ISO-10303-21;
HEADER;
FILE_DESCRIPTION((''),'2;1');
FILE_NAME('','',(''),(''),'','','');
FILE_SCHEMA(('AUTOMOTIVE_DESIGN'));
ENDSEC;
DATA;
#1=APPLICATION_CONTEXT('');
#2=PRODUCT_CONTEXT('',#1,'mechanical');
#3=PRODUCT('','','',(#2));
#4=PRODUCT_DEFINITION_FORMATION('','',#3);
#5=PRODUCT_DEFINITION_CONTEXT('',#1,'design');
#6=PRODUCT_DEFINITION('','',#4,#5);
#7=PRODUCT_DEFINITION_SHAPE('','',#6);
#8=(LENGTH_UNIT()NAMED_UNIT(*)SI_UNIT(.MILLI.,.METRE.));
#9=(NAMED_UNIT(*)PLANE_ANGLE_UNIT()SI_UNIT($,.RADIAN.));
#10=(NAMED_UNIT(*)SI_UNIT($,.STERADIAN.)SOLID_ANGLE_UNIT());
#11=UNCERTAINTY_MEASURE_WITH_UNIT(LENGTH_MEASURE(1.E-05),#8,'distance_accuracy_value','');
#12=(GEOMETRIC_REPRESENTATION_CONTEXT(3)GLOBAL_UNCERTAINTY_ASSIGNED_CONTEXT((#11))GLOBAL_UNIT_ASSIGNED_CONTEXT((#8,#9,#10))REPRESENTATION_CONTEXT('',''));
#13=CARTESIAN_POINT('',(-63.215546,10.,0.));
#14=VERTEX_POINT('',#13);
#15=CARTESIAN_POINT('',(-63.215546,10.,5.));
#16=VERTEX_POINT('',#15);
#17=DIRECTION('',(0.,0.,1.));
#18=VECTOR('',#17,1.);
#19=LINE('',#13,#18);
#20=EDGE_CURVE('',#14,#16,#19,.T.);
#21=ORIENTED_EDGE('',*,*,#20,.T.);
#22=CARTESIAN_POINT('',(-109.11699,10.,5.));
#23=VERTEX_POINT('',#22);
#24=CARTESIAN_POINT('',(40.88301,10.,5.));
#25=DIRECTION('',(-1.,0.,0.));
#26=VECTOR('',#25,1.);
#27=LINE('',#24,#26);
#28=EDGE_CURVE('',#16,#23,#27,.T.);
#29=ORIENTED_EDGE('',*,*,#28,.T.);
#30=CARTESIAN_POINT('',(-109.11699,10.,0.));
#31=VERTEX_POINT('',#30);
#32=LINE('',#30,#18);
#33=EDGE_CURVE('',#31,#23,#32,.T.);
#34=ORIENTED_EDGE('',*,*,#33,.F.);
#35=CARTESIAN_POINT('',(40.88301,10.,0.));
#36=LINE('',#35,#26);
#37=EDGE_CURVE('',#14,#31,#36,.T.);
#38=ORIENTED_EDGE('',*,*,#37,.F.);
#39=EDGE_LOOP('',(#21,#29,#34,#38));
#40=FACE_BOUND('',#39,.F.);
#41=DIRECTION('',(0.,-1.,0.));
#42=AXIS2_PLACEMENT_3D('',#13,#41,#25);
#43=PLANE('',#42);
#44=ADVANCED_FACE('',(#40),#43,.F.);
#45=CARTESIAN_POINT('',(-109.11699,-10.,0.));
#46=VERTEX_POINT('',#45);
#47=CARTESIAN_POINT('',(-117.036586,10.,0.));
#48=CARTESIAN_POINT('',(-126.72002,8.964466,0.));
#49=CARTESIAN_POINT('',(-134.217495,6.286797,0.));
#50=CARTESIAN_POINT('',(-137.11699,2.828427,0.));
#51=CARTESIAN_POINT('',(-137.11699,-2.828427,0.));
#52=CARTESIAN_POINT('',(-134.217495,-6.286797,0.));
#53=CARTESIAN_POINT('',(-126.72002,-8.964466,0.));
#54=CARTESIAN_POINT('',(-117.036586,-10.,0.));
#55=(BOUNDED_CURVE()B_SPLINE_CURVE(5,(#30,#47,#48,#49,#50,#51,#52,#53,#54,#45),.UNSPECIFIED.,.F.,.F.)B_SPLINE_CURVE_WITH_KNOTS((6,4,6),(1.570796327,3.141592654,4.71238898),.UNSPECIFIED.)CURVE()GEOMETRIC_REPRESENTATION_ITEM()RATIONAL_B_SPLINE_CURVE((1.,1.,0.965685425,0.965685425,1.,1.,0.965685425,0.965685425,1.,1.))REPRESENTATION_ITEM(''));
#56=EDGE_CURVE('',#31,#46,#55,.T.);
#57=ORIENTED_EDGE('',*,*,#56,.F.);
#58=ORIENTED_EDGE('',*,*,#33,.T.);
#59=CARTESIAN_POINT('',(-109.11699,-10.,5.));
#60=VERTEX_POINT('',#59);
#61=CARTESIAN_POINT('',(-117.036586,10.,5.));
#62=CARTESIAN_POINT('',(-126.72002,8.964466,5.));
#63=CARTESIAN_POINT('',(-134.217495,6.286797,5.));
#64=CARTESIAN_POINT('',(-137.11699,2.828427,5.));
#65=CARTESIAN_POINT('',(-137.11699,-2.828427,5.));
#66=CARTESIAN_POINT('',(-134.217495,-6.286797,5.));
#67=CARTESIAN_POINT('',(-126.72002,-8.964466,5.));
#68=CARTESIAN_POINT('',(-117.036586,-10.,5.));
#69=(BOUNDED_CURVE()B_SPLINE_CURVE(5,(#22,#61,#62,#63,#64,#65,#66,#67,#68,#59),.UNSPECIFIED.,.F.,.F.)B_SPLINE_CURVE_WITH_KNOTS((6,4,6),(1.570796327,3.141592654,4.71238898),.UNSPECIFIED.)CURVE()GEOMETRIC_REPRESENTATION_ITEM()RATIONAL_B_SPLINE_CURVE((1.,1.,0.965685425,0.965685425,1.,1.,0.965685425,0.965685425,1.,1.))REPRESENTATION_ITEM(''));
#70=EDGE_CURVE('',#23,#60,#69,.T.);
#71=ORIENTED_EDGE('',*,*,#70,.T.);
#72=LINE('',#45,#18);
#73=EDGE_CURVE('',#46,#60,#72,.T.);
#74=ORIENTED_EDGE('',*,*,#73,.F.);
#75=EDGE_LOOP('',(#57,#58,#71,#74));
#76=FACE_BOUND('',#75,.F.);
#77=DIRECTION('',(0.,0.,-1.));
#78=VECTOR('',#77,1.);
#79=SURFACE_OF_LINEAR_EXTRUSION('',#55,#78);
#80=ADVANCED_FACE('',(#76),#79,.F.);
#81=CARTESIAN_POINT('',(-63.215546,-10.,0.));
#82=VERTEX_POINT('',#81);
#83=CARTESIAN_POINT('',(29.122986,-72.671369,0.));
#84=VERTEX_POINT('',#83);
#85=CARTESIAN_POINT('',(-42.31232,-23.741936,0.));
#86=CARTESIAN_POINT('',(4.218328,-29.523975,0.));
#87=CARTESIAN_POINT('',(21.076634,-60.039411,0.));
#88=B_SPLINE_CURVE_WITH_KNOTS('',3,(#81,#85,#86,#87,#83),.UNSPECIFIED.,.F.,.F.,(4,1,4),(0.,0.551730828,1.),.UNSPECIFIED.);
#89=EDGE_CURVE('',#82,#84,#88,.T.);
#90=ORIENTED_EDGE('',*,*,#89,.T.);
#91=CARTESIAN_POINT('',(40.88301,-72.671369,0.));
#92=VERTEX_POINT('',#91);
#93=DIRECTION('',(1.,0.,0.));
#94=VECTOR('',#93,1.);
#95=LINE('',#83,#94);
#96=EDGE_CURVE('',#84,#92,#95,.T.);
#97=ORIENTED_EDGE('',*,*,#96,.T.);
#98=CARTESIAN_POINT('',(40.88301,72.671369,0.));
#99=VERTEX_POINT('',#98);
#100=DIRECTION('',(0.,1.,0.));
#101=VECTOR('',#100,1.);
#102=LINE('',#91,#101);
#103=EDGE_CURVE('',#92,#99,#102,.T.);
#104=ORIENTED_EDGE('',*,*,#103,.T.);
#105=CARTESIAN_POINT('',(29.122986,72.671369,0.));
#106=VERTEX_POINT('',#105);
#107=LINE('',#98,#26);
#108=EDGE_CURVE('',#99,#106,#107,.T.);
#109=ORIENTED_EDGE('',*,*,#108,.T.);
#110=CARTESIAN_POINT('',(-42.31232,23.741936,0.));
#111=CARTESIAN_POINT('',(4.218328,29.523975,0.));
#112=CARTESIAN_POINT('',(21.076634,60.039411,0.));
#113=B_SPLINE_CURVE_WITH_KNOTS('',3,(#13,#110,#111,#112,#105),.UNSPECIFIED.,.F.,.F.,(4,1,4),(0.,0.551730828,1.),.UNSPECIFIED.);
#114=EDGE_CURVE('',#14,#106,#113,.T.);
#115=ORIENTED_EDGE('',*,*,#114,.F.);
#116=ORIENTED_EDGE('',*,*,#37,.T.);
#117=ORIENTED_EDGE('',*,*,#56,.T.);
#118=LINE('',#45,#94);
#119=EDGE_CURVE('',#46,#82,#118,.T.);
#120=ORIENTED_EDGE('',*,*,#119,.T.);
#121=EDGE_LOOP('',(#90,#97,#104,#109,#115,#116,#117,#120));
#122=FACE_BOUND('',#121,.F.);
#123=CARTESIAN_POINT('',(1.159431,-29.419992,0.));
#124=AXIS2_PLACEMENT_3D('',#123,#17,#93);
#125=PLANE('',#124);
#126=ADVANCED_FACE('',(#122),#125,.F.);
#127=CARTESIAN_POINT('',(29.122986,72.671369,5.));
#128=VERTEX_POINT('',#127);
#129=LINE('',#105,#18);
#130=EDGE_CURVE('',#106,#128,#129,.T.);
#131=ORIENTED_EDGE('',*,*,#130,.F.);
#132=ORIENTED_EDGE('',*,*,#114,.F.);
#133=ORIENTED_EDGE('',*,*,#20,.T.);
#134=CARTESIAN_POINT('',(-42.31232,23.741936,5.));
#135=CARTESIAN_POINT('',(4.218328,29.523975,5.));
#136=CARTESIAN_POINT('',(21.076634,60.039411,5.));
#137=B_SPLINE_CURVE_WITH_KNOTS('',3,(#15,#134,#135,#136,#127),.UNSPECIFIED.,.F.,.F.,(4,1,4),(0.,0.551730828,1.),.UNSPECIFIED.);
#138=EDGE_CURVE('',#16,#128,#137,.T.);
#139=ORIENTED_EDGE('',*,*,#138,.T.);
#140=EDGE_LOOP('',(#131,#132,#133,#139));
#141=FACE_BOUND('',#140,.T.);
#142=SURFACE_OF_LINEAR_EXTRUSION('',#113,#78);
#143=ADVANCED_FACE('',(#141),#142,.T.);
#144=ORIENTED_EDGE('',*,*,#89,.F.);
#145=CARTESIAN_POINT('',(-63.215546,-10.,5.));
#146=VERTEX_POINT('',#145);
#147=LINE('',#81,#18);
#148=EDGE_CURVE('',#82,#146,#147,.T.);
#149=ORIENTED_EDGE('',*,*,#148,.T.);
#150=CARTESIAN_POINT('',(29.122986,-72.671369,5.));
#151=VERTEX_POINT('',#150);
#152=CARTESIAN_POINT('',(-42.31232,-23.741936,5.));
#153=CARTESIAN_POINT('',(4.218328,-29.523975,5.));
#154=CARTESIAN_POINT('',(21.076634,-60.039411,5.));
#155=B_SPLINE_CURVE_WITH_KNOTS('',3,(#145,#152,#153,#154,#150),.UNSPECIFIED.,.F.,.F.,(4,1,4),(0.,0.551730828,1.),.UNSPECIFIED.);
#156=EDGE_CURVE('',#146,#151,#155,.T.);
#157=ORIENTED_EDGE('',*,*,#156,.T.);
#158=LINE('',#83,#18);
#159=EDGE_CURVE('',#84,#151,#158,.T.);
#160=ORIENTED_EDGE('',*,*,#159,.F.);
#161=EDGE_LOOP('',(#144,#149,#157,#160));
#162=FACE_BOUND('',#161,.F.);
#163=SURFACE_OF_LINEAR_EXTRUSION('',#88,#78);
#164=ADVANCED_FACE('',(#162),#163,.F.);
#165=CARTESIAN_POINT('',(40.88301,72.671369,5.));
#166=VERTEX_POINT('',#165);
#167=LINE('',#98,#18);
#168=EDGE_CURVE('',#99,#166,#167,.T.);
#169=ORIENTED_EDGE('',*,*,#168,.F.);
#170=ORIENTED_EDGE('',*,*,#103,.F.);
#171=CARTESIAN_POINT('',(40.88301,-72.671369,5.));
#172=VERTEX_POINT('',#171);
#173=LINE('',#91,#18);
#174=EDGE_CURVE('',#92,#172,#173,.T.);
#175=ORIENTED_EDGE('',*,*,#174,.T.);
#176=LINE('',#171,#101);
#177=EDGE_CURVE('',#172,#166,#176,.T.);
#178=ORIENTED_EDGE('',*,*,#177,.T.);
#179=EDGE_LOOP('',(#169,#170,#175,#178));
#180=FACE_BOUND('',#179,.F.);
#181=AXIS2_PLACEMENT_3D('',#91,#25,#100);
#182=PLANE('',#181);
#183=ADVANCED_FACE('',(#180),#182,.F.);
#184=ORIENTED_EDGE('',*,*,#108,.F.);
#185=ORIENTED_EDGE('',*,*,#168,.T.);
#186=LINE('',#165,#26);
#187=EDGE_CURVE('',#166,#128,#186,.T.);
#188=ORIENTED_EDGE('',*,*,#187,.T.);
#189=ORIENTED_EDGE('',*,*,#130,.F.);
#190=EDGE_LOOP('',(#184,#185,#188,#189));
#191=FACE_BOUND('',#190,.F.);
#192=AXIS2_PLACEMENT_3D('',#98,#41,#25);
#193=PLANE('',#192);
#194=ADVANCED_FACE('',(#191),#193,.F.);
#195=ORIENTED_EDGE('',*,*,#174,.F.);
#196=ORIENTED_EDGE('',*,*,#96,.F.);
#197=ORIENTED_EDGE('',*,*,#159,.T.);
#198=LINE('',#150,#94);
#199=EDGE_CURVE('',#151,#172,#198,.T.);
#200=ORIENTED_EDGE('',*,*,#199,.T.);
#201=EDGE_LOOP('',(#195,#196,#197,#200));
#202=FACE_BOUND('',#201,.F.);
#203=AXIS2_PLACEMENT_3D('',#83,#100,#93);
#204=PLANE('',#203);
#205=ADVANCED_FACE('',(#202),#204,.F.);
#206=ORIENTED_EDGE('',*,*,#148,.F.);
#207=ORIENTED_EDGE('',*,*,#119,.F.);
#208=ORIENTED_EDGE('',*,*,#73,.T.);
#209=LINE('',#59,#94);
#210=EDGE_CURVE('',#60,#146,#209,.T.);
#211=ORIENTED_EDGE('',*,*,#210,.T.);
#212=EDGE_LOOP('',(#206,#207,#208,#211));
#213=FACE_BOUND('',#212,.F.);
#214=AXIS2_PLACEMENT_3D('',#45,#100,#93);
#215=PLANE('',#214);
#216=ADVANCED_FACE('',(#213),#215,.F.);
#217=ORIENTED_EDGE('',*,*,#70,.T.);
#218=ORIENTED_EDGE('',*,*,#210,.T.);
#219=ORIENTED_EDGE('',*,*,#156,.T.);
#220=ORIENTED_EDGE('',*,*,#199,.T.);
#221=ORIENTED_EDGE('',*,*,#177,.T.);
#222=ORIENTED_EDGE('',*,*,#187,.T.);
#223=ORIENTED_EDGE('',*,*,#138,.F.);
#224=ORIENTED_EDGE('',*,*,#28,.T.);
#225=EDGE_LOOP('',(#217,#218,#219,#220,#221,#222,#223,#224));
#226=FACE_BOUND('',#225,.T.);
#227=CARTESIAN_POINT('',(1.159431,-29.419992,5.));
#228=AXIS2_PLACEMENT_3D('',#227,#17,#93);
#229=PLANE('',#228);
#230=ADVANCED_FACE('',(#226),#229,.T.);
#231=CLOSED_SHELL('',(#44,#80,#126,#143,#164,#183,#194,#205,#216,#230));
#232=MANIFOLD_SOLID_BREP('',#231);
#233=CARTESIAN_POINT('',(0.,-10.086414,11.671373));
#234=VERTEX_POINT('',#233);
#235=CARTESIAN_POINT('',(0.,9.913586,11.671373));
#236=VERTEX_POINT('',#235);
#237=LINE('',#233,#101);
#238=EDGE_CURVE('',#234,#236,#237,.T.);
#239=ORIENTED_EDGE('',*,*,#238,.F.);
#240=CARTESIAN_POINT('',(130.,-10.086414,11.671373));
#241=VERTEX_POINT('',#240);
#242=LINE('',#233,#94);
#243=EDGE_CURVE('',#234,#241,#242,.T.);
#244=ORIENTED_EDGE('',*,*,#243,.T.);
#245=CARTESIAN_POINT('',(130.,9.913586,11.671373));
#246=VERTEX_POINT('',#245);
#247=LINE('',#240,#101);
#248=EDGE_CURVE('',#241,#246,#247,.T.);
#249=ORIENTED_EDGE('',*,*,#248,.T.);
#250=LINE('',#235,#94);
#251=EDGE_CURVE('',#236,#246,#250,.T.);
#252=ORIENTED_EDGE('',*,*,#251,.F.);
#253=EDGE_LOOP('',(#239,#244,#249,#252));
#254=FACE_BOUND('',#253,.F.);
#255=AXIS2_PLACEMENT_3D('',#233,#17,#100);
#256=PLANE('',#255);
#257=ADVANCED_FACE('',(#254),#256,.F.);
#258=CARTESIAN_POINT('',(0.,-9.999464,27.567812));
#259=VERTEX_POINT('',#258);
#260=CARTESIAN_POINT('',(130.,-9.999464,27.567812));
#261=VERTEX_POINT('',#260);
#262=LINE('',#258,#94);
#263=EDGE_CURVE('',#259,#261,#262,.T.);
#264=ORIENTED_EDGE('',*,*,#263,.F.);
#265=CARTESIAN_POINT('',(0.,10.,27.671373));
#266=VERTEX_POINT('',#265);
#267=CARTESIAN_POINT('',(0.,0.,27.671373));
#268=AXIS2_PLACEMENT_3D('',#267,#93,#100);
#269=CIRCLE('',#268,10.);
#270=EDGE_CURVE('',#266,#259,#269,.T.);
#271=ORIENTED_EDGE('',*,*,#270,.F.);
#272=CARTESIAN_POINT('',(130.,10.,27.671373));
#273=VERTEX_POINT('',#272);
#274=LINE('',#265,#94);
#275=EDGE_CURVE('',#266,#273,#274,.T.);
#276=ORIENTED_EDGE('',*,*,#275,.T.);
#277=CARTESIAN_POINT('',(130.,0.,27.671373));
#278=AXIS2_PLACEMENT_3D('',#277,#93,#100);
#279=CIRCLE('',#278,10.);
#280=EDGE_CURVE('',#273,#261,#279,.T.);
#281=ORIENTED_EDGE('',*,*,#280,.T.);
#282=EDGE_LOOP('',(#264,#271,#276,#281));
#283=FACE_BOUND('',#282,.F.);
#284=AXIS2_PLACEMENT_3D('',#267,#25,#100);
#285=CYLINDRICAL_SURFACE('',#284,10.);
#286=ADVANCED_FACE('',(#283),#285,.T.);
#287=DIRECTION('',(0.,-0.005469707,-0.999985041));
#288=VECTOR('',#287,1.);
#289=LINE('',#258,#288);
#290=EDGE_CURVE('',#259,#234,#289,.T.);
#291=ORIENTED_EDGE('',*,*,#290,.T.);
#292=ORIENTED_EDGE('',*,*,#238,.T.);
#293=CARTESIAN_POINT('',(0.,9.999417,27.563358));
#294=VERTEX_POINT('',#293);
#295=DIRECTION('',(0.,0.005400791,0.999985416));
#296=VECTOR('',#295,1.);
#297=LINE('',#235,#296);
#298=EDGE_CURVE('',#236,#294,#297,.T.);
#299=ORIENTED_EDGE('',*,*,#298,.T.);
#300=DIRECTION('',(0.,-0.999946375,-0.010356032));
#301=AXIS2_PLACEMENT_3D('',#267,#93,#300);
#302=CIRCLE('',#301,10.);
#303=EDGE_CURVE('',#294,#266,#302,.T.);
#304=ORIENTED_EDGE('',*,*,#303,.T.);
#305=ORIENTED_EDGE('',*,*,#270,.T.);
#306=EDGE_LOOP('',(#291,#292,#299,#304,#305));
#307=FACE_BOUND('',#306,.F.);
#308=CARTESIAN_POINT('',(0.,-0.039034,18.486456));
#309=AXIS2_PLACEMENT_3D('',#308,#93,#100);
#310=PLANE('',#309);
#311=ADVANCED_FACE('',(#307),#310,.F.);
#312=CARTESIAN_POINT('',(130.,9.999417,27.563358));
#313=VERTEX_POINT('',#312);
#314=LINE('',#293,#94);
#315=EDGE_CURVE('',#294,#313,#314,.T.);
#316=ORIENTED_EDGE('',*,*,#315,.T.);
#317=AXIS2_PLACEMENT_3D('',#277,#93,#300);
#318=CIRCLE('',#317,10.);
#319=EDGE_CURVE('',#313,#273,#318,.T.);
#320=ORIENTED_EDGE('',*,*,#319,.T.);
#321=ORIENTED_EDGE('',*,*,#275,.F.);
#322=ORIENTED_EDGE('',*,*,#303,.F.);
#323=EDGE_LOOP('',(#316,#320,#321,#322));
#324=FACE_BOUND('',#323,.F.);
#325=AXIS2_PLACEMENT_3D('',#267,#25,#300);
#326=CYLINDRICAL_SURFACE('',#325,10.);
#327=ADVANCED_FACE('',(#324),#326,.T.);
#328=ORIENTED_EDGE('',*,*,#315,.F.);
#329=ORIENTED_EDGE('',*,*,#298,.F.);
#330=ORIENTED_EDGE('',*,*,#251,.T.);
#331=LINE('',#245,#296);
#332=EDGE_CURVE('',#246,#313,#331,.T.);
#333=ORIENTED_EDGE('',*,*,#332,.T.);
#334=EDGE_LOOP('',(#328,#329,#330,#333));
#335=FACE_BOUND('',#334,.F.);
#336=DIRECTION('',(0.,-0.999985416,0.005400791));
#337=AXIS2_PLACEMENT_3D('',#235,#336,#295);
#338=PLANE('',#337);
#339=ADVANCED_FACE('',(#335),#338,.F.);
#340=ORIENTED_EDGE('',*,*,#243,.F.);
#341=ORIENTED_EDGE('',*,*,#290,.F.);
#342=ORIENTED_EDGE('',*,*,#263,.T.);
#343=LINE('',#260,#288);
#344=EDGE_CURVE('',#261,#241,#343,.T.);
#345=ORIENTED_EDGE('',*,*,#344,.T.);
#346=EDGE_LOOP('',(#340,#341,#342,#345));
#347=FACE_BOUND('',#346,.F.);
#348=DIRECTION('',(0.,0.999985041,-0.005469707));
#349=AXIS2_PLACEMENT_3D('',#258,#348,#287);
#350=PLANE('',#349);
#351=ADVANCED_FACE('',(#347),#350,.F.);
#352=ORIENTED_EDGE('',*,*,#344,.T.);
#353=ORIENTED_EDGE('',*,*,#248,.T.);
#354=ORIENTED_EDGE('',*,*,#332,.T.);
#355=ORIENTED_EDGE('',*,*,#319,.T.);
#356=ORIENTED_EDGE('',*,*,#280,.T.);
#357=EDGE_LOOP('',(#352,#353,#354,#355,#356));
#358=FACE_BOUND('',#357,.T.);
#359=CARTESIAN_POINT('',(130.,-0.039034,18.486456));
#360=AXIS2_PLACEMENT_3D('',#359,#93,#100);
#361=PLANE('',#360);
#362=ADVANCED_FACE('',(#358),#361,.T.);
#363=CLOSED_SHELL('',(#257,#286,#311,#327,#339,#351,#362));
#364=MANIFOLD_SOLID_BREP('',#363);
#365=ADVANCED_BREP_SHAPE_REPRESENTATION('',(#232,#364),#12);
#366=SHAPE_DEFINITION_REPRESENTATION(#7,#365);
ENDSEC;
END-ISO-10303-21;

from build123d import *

# Parameters (mm, degrees)
F1_DEPTH = 5
F3_DEPTH = 130


# Not quite as in the source:
# - a feature names something its author has since deleted; it is built from what else it names


with BuildPart() as f1:
    # F0 (on Top) → F1 (new body)
    with BuildSketch(Plane.XY):
        with BuildLine():
            Line((40.8830098808, -10), (-63.2155463099, -10))
            add(Edge.make_bspline(
                [(-63.2155463099, -10), (-42.3123203218, -23.7419363111), (4.2183280181, -29.5239745011), (21.0766339926, -60.0394110264), (29.1229858994, -72.6713687181)],
                knots=[0, 0, 0, 0, 0.551730828, 1, 1, 1, 1], degree=3))
            Line((29.1229858994, -72.6713687181), (40.8830098808, -72.6713687181))
            Line((40.8830098808, -72.6713687181), (40.8830098808, -10))
        make_face()
        with BuildLine():
            Line((-63.2155463099, 10), (-109.1169901192, 10))
            add(Edge.make_bspline(
                [(-81.1169901192, 0), (-81.1169901192, 10), (-109.1169901192, 10)],
                knots=[0, 0, 0, 1.5707963268, 1.5707963268, 1.5707963268], degree=2, weights=[1, 0.7071067812, 1]))
            add(Edge.make_bspline(
                [(-109.1169901192, -10), (-81.1169901192, -10), (-81.1169901192, 0)],
                knots=[4.7123889804, 4.7123889804, 4.7123889804, 6.2831853072, 6.2831853072, 6.2831853072], degree=2, weights=[1, 0.7071067812, 1]))
            Line((-109.1169901192, -10), (-63.2155463099, -10))
            Line((-63.2155463099, -10), (40.8830098808, -10))
            Line((40.8830098808, -10), (40.8830098808, 0))
            Line((40.8830098808, 0), (40.8830098808, 10))
            Line((40.8830098808, 10), (-63.2155463099, 10))
        make_face()
        with BuildLine():
            add(Edge.make_bspline(
                [(-63.2155463099, 10), (-42.3123203218, 23.7419363111), (4.2183280181, 29.5239745011), (21.0766339926, 60.0394110264), (29.1229858994, 72.6713687181)],
                knots=[0, 0, 0, 0, 0.551730828, 1, 1, 1, 1], degree=3))
            Line((-63.2155463099, 10), (40.8830098808, 10))
            Line((40.8830098808, 10), (40.8830098808, 72.6713687181))
            Line((40.8830098808, 72.6713687181), (29.1229858994, 72.6713687181))
        make_face()
        with BuildLine():
            add(Edge.make_bspline(
                [(-81.1169901192, 0), (-81.1169901192, 10), (-109.1169901192, 10)],
                knots=[0, 0, 0, 1.5707963268, 1.5707963268, 1.5707963268], degree=2, weights=[1, 0.7071067812, 1]))
            add(Edge.make_bspline(
                [(-109.1169901192, 10), (-137.1169901192, 10), (-137.1169901192, 0)],
                knots=[1.5707963268, 1.5707963268, 1.5707963268, 3.1415926536, 3.1415926536, 3.1415926536], degree=2, weights=[1, 0.7071067812, 1]))
            Line((-137.1169901192, 0), (-81.1169901192, 0))
        make_face()
        with BuildLine():
            add(Edge.make_bspline(
                [(-109.1169901192, -10), (-81.1169901192, -10), (-81.1169901192, 0)],
                knots=[4.7123889804, 4.7123889804, 4.7123889804, 6.2831853072, 6.2831853072, 6.2831853072], degree=2, weights=[1, 0.7071067812, 1]))
            Line((-81.1169901192, 0), (-137.1169901192, 0))
            add(Edge.make_bspline(
                [(-137.1169901192, 0), (-137.1169901192, -10), (-109.1169901192, -10)],
                knots=[3.1415926536, 3.1415926536, 3.1415926536, 4.7123889804, 4.7123889804, 4.7123889804], degree=2, weights=[1, 0.7071067812, 1]))
        make_face()
    extrude(amount=F1_DEPTH)


with BuildPart() as f3:
    # F2 (on Right) → F3 (new body)
    with BuildSketch(Plane.YZ):
        with BuildLine():
            Line((9.9135860801, 11.6713725179), (10, 27.6713725179))
            ThreePointArc((10, 27.6713725179), (0.0517808517, 17.6715065817), (-9.9994637487, 27.5678122029))
            Line((-9.9994637487, 27.5678122029), (-10.0864139199, 11.6713725179))
            Line((-10.0864139199, 11.6713725179), (9.9135860801, 11.6713725179))
        make_face()
        with BuildLine():
            ThreePointArc((-9.9994637487, 27.5678122029), (0.0517808517, 17.6715065817), (10, 27.6713725179))
            ThreePointArc((10, 27.6713725179), (-0.0517808517, 37.6712384542), (-9.9994637487, 27.5678122029))
        make_face()
    extrude(amount=F3_DEPTH)


solid = Compound([f1.part, f3.part])
